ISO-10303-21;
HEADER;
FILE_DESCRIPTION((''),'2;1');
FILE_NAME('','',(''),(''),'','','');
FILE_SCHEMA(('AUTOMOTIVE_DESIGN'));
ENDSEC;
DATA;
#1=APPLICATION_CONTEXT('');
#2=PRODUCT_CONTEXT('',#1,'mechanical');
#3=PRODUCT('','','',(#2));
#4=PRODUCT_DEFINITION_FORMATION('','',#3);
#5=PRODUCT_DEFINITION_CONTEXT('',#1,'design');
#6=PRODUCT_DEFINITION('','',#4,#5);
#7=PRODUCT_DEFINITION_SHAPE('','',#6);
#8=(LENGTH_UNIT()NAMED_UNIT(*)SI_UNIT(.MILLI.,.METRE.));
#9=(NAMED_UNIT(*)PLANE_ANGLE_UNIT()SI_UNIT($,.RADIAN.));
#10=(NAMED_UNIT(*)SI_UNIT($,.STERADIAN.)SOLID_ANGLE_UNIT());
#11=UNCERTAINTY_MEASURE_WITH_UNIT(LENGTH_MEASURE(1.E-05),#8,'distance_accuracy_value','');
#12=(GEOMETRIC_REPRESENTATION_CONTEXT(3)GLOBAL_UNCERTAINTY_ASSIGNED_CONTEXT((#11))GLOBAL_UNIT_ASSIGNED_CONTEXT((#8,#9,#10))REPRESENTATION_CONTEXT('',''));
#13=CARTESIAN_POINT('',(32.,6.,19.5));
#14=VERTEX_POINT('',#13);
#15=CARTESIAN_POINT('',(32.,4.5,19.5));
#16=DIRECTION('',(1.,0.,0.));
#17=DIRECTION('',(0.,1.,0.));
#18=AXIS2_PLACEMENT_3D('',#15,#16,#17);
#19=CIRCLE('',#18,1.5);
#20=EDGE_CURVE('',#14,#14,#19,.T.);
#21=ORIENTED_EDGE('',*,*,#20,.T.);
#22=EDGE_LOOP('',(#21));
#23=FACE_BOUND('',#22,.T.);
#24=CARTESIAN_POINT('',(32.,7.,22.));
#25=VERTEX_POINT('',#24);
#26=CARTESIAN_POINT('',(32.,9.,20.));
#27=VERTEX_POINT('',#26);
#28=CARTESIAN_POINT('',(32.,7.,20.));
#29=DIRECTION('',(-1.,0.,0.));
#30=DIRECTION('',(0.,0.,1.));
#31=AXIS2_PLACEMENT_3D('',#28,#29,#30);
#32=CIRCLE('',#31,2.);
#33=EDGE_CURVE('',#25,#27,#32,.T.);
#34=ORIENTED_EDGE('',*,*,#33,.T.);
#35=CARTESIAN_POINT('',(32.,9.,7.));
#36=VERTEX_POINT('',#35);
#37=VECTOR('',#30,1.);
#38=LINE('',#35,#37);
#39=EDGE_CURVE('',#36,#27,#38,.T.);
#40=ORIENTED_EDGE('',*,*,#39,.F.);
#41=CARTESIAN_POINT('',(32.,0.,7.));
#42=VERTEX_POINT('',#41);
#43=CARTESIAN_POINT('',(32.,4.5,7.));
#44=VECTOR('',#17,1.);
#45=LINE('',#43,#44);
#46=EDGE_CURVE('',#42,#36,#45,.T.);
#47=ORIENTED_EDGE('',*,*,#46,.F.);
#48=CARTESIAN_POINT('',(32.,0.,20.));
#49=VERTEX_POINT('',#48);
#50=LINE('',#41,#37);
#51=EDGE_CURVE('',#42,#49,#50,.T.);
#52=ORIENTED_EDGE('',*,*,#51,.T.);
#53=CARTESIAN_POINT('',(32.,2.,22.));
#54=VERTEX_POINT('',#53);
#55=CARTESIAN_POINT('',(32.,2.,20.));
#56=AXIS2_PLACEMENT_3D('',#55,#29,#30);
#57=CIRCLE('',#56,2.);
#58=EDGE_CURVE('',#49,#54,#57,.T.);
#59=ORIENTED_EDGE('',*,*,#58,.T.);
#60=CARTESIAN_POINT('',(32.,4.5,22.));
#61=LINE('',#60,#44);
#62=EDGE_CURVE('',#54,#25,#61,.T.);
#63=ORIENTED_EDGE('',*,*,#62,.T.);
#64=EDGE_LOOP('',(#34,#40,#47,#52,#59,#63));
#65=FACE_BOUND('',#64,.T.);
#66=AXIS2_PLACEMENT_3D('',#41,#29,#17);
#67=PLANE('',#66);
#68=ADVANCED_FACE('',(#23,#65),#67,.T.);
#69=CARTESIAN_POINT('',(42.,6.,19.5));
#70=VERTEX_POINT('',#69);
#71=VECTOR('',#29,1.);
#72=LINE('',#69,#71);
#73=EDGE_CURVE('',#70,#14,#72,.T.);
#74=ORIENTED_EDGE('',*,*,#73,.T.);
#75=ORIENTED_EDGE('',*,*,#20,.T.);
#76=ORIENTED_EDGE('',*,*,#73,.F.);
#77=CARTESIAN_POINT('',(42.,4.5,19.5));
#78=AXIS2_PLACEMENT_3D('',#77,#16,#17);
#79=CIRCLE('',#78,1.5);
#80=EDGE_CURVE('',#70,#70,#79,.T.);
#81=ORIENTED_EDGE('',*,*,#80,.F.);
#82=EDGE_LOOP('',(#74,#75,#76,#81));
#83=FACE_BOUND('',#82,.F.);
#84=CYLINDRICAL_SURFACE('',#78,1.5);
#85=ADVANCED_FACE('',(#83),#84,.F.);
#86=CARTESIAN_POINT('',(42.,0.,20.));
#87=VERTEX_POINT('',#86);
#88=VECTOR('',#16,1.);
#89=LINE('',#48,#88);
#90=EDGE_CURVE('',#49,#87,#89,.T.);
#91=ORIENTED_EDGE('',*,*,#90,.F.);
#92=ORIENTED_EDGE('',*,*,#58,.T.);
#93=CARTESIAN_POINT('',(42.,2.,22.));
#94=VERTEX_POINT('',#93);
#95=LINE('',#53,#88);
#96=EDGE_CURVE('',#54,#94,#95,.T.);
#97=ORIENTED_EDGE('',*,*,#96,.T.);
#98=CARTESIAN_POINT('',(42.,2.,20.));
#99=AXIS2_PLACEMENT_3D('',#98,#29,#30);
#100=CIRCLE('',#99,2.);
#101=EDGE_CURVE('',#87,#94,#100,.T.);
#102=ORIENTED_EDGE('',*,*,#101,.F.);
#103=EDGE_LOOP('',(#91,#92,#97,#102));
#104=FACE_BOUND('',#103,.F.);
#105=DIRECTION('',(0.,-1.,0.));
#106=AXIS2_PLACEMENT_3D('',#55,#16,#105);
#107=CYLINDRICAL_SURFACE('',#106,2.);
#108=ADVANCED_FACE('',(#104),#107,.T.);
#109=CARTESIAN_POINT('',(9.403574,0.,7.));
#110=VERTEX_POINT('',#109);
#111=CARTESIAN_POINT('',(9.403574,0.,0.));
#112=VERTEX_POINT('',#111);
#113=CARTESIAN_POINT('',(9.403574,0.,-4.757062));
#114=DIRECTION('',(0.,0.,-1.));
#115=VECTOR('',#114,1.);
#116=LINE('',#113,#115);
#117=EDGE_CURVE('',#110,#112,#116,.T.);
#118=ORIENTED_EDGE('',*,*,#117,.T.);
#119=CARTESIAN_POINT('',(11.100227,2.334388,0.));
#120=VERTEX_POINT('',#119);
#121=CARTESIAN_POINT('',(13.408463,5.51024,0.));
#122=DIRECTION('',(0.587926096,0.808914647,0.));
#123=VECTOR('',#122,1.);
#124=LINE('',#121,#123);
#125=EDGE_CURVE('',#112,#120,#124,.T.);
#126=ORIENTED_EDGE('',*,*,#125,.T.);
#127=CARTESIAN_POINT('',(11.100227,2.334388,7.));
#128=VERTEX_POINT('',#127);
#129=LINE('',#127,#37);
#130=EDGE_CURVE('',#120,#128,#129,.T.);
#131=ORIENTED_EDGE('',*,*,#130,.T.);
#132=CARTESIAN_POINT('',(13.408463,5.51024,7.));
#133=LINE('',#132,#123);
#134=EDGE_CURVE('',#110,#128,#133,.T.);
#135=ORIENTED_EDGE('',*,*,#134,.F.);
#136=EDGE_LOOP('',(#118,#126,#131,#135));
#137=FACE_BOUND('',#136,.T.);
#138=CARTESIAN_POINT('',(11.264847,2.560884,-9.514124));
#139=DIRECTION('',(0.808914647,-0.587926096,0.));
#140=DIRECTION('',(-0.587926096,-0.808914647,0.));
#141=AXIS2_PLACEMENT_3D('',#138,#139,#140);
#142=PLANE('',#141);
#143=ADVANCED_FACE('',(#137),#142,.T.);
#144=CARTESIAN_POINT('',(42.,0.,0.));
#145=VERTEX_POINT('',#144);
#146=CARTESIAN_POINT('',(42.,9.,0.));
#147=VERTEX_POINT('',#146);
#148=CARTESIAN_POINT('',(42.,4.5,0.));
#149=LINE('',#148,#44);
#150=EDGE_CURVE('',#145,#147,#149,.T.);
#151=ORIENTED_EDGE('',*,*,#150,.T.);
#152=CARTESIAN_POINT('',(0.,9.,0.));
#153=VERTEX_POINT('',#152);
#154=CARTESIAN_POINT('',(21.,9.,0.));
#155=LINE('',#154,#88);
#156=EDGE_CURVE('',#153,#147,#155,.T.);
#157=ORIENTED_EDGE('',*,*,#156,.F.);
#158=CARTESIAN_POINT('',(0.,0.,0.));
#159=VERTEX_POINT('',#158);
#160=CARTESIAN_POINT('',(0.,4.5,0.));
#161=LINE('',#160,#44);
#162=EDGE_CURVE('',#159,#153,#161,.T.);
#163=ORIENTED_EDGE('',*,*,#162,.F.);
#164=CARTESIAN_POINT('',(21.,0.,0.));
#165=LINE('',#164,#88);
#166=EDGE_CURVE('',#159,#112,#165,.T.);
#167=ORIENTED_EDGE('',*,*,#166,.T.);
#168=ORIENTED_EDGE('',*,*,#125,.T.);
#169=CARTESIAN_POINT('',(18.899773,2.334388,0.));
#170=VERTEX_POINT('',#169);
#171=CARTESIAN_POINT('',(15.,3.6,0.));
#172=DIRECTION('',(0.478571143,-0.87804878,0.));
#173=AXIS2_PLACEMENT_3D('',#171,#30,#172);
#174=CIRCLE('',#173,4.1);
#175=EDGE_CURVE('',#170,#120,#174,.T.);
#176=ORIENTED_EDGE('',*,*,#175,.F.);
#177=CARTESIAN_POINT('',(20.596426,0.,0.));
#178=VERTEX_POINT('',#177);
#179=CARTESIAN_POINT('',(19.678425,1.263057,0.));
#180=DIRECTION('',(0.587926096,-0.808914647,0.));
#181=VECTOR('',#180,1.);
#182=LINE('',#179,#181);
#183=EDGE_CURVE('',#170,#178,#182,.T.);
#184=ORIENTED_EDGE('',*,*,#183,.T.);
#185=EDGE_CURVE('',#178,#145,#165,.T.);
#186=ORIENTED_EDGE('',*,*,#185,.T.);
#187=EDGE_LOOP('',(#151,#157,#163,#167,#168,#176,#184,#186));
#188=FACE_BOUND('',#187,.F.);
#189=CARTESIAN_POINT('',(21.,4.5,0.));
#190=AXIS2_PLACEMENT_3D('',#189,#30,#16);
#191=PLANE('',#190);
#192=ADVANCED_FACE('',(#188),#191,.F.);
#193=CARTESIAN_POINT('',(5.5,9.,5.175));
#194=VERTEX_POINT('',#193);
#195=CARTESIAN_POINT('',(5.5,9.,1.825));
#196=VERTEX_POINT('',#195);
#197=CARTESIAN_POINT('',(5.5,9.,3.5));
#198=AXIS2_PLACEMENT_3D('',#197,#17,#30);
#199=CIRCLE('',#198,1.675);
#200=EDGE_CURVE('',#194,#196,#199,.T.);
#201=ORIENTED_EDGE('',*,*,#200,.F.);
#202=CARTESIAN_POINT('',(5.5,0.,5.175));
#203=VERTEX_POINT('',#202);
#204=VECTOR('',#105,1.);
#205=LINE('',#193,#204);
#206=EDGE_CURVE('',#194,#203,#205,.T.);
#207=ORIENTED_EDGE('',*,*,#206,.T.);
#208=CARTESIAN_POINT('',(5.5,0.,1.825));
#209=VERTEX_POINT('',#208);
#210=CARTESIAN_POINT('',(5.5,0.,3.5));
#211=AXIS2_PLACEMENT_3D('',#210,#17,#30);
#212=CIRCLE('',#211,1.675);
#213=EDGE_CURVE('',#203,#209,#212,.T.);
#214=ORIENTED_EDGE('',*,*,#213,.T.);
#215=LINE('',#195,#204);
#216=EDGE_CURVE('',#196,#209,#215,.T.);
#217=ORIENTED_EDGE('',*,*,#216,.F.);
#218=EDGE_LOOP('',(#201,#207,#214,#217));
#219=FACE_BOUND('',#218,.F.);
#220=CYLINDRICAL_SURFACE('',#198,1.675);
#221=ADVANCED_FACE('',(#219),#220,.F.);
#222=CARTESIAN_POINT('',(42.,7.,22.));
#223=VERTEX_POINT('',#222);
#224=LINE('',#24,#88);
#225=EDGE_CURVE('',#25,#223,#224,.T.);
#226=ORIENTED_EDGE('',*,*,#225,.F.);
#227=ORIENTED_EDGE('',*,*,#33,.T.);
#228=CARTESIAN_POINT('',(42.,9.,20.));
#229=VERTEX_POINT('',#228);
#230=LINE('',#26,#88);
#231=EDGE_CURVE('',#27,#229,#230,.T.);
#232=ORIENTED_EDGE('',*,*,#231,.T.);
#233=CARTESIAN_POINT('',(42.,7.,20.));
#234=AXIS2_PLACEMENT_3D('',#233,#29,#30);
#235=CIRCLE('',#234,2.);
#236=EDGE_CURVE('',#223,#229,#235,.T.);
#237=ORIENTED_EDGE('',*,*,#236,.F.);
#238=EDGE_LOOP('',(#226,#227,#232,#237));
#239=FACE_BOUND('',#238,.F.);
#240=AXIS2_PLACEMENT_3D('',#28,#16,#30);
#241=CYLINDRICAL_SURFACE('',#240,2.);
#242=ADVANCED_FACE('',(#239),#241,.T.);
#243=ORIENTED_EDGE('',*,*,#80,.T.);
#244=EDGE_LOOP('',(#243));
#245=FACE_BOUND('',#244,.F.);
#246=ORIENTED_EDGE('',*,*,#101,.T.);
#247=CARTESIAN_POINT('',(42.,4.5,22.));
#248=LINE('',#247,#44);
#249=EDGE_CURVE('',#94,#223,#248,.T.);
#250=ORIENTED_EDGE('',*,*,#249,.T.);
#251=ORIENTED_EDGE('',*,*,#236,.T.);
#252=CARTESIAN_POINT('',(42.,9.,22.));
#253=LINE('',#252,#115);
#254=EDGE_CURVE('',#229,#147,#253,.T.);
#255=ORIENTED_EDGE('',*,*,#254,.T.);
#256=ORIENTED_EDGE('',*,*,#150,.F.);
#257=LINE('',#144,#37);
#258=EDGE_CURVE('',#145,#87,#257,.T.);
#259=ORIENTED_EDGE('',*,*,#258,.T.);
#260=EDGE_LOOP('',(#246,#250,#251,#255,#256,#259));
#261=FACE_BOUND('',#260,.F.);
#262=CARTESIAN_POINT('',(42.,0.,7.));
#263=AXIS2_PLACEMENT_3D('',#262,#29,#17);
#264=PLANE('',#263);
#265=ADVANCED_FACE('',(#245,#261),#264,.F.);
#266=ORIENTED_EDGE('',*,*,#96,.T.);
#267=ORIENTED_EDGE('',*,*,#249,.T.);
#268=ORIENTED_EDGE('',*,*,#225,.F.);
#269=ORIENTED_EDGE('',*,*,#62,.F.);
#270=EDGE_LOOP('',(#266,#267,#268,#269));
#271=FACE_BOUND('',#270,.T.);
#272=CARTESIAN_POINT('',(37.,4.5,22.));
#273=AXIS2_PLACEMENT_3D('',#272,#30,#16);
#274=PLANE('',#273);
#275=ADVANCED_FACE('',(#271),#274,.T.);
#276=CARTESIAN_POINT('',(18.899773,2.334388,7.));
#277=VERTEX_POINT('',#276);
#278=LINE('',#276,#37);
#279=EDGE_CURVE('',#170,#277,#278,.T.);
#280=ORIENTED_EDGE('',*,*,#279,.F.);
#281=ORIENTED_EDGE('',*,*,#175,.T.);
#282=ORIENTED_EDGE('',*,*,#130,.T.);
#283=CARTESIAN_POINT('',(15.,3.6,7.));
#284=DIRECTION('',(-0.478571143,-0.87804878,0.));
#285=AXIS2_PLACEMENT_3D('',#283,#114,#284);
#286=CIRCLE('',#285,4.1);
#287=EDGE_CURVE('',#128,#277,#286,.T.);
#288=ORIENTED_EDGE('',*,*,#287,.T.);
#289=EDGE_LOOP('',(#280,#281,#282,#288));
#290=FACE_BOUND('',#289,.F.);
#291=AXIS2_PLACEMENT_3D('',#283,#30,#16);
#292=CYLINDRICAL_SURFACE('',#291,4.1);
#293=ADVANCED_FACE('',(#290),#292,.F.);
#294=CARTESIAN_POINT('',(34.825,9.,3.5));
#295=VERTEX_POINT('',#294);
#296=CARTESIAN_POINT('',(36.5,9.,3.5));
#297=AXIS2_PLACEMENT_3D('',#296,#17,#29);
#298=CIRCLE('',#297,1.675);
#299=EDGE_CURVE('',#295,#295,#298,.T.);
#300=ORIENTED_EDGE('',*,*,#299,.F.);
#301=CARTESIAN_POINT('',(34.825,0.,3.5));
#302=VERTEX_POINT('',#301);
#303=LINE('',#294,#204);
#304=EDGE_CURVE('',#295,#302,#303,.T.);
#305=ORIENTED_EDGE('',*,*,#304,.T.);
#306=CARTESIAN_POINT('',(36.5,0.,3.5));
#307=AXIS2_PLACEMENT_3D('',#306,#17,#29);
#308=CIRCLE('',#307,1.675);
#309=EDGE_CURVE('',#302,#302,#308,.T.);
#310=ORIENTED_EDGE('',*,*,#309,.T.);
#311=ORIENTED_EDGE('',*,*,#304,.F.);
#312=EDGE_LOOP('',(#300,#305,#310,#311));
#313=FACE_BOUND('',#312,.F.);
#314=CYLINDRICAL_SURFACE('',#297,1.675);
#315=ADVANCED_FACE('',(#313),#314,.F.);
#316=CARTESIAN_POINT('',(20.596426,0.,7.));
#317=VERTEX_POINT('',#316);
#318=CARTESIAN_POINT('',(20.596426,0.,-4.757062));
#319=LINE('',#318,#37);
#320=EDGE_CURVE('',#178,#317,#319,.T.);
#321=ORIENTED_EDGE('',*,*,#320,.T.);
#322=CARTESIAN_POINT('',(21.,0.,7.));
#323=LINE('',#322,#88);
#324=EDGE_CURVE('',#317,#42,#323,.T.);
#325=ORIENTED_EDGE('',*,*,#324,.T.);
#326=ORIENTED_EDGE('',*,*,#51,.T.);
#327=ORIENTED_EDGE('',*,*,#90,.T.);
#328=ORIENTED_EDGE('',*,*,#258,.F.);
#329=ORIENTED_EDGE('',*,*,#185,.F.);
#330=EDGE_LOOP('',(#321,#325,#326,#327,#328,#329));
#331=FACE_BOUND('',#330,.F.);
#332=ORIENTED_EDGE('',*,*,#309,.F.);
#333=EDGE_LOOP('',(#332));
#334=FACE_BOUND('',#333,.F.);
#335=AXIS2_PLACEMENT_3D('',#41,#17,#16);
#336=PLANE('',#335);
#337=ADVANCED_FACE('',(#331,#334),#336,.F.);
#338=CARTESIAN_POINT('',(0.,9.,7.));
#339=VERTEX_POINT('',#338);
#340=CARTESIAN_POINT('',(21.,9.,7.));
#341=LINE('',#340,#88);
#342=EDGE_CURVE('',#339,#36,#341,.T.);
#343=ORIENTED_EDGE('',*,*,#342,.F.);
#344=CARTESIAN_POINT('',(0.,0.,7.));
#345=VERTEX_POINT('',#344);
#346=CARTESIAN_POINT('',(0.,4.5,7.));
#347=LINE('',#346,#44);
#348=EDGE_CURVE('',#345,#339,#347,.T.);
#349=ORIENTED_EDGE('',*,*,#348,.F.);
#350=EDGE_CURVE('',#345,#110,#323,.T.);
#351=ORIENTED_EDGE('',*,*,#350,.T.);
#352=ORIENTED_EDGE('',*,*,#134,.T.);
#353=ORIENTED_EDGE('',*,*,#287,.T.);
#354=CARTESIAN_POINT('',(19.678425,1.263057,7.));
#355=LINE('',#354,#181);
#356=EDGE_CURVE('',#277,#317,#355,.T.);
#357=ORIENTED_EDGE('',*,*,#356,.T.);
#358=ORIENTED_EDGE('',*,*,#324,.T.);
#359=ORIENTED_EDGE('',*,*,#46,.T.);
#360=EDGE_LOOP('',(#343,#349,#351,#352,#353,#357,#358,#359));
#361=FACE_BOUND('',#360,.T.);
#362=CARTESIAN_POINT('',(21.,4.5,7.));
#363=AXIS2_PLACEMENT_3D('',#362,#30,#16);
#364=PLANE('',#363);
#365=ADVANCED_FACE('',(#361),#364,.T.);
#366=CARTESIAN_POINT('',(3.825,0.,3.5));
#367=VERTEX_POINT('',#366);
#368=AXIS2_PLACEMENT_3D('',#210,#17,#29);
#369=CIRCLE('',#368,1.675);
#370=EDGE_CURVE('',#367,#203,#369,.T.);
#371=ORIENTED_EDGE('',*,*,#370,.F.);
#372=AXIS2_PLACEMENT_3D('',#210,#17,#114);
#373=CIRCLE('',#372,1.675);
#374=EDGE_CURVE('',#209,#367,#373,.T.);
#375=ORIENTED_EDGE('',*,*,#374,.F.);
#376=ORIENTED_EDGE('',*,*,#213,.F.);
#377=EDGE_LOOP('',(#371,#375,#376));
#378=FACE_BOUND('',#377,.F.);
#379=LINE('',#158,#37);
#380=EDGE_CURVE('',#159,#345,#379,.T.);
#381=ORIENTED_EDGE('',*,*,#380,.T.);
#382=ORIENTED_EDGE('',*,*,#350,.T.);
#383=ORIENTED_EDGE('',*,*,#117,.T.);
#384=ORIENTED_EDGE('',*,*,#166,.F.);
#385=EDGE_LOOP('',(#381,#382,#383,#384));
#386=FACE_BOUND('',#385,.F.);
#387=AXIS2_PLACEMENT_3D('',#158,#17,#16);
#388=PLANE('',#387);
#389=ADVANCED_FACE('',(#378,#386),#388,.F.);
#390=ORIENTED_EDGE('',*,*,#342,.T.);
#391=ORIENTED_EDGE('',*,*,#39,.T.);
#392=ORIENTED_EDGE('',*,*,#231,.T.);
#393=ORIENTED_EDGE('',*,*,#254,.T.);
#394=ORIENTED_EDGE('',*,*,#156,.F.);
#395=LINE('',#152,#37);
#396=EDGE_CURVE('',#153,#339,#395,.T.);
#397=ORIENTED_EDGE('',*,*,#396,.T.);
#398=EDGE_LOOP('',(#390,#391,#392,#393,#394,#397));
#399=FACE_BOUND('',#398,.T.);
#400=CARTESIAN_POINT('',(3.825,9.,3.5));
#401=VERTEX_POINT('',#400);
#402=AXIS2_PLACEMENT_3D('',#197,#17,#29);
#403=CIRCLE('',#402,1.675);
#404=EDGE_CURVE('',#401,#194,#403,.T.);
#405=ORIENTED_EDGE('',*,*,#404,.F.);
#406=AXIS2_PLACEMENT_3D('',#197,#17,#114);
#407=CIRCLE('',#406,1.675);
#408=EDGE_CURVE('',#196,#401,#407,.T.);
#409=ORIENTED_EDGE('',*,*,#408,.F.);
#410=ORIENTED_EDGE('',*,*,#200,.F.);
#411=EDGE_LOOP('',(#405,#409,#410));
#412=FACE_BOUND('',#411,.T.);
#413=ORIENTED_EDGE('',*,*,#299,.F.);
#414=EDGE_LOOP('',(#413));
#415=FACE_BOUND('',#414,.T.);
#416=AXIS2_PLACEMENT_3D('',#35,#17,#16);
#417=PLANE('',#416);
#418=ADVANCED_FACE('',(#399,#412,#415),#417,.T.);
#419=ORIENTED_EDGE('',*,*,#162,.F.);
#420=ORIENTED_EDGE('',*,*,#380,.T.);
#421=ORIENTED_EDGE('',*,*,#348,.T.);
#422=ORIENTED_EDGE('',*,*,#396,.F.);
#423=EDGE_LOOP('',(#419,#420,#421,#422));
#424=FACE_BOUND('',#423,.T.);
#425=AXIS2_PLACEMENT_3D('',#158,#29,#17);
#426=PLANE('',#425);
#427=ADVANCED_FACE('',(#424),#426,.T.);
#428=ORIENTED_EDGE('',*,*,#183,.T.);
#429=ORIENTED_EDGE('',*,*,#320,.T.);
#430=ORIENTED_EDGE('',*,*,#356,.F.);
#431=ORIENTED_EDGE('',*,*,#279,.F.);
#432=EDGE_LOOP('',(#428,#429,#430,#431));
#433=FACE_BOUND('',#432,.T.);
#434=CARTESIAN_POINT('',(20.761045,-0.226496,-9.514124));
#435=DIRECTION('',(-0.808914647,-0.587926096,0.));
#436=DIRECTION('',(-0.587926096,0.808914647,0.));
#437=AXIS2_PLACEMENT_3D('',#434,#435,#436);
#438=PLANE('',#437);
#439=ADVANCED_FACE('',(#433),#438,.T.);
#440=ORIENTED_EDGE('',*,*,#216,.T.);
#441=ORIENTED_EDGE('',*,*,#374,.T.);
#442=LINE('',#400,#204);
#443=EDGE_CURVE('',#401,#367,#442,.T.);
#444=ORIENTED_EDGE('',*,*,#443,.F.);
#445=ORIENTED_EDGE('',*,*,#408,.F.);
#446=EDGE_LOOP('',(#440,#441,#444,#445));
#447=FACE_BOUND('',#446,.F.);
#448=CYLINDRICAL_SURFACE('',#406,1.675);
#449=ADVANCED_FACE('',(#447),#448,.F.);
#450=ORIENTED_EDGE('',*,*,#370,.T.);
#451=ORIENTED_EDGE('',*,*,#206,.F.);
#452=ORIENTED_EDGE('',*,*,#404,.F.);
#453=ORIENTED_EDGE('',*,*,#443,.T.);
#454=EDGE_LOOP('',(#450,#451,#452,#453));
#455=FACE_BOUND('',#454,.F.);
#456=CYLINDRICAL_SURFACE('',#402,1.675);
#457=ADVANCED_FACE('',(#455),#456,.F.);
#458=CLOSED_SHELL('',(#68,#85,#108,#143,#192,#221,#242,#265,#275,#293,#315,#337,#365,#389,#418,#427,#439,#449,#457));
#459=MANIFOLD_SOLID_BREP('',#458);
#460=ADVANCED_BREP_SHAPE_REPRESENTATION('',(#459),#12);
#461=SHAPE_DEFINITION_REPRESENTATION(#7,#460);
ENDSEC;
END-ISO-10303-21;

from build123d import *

# Parameters (mm, degrees)
F1_W        = 42
F1_H        = 9
F2_DEPTH    = 7
F3_R        = 4.1
F4_DEPTH    = 25
F5_T1_DEPTH = 26.0282480506
F7_DEPTH    = 25
F8_W        = 10
F8_H        = 9
F9_DEPTH    = 15
F10_R       = 1.5
F11_DEPTH   = 25
F12_R       = 2


# Not quite as in the source:
# - a fillet or chamfer that OpenCascade refuses, or shapes differently, is made with other operations: its cross-section is extruded or revolved along the edge and cut away or added


with BuildPart() as f2:
    # F1 (on Top) → F2 (new body)
    with BuildSketch(Plane.XY):
        with Locations((21, 4.5)):
            Rectangle(F1_W, F1_H)
    extrude(amount=F2_DEPTH)

    # F3 (on face) → F4 (cut)
    with BuildSketch(Plane.XY.offset(7)):
        with Locations((15, 3.6)):
            Circle(F3_R)
    extrude(amount=-F4_DEPTH, mode=Mode.SUBTRACT)

    # F5: chamfer of 7 on 2 edges, made by hand

    # F5_s2 → F5_t1 (cut)
    with BuildSketch(Plane.XY.offset(-9.5141240253)):
        with BuildLine():
            Line((20.7610452751, -0.2264961011), (18.73515334, 2.5608842714))
            Line((18.73515334, 2.5608842714), (18.6019903715, 2.6041002851))
            ThreePointArc((18.6019903715, 2.6041002851), (18.0707550937, 1.0995874031), (16.895141727, 0.1229268293))
            Line((16.895141727, 0.1229268293), (16.962141687, -0.14))
            ThreePointArc((16.962141687, -0.14), (18.861593481, -0.14), (20.7610452751, -0.3664961011))
            Line((20.7610452751, -0.3664961011), (20.7610452751, -0.2264961011))
        make_face()
        with BuildLine():
            Line((11.26484666, 2.5608842714), (9.2389547249, -0.2264961011))
            Line((9.2389547249, -0.2264961011), (9.2389547249, -0.3664961011))
            ThreePointArc((9.2389547249, -0.3664961011), (11.138406519, -0.14), (13.037858313, -0.14))
            Line((13.037858313, -0.14), (13.104858273, 0.1229268293))
            ThreePointArc((13.104858273, 0.1229268293), (11.9292449063, 1.0995874031), (11.3980096285, 2.6041002851))
            Line((11.3980096285, 2.6041002851), (11.26484666, 2.5608842714))
        make_face()
    extrude(amount=F5_T1_DEPTH, mode=Mode.SUBTRACT)

    # F6 (on face) → F7 (cut)
    with BuildSketch(Plane(origin=(0, 9, 0), x_dir=(-1, 0, 0), z_dir=(0, 1, 0))):
        with BuildLine():
            Line((-5.5, 3.5), (-3.825, 3.5))
            ThreePointArc((-3.825, 3.5), (-4.3155961415, 4.6844038585), (-5.5, 5.175))
            Line((-5.5, 5.175), (-5.5, 3.5))
        make_face()
        with BuildLine():
            ThreePointArc((-5.5, 1.825), (-4.3155961415, 2.3155961415), (-3.825, 3.5))
            Line((-3.825, 3.5), (-5.5, 3.5))
            Line((-5.5, 3.5), (-5.5, 1.825))
        make_face()
        with BuildLine():
            Line((-5.5, 3.5), (-5.5, 5.175))
            ThreePointArc((-5.5, 5.175), (-7.175, 3.5), (-5.5, 1.825))
            Line((-5.5, 1.825), (-5.5, 3.5))
        make_face()
        with BuildLine():
            ThreePointArc((-38.175, 3.5), (-36.5, 1.825), (-34.825, 3.5))
            ThreePointArc((-34.825, 3.5), (-36.5, 5.175), (-38.175, 3.5))
        make_face()
    extrude(amount=-F7_DEPTH, mode=Mode.SUBTRACT)

    # F8 (on face) → F9 (join)
    with BuildSketch(Plane.XY.offset(7)):
        with Locations((37, 4.5)):
            Rectangle(F8_W, F8_H)
    extrude(amount=F9_DEPTH)

    # F10 (on face) → F11 (cut)
    with BuildSketch(Plane.YZ.offset(42)):
        with Locations((4.5, 19.5)):
            Circle(F10_R)
    extrude(amount=-F11_DEPTH, mode=Mode.SUBTRACT)

    # F12
    f12_edges = [f2.edges().sort_by_distance(p)[0] for p in [
        (37, 0, 22),
        (37, 9, 22),
    ]]
    fillet(f12_edges, radius=F12_R)


solid = f2.part
